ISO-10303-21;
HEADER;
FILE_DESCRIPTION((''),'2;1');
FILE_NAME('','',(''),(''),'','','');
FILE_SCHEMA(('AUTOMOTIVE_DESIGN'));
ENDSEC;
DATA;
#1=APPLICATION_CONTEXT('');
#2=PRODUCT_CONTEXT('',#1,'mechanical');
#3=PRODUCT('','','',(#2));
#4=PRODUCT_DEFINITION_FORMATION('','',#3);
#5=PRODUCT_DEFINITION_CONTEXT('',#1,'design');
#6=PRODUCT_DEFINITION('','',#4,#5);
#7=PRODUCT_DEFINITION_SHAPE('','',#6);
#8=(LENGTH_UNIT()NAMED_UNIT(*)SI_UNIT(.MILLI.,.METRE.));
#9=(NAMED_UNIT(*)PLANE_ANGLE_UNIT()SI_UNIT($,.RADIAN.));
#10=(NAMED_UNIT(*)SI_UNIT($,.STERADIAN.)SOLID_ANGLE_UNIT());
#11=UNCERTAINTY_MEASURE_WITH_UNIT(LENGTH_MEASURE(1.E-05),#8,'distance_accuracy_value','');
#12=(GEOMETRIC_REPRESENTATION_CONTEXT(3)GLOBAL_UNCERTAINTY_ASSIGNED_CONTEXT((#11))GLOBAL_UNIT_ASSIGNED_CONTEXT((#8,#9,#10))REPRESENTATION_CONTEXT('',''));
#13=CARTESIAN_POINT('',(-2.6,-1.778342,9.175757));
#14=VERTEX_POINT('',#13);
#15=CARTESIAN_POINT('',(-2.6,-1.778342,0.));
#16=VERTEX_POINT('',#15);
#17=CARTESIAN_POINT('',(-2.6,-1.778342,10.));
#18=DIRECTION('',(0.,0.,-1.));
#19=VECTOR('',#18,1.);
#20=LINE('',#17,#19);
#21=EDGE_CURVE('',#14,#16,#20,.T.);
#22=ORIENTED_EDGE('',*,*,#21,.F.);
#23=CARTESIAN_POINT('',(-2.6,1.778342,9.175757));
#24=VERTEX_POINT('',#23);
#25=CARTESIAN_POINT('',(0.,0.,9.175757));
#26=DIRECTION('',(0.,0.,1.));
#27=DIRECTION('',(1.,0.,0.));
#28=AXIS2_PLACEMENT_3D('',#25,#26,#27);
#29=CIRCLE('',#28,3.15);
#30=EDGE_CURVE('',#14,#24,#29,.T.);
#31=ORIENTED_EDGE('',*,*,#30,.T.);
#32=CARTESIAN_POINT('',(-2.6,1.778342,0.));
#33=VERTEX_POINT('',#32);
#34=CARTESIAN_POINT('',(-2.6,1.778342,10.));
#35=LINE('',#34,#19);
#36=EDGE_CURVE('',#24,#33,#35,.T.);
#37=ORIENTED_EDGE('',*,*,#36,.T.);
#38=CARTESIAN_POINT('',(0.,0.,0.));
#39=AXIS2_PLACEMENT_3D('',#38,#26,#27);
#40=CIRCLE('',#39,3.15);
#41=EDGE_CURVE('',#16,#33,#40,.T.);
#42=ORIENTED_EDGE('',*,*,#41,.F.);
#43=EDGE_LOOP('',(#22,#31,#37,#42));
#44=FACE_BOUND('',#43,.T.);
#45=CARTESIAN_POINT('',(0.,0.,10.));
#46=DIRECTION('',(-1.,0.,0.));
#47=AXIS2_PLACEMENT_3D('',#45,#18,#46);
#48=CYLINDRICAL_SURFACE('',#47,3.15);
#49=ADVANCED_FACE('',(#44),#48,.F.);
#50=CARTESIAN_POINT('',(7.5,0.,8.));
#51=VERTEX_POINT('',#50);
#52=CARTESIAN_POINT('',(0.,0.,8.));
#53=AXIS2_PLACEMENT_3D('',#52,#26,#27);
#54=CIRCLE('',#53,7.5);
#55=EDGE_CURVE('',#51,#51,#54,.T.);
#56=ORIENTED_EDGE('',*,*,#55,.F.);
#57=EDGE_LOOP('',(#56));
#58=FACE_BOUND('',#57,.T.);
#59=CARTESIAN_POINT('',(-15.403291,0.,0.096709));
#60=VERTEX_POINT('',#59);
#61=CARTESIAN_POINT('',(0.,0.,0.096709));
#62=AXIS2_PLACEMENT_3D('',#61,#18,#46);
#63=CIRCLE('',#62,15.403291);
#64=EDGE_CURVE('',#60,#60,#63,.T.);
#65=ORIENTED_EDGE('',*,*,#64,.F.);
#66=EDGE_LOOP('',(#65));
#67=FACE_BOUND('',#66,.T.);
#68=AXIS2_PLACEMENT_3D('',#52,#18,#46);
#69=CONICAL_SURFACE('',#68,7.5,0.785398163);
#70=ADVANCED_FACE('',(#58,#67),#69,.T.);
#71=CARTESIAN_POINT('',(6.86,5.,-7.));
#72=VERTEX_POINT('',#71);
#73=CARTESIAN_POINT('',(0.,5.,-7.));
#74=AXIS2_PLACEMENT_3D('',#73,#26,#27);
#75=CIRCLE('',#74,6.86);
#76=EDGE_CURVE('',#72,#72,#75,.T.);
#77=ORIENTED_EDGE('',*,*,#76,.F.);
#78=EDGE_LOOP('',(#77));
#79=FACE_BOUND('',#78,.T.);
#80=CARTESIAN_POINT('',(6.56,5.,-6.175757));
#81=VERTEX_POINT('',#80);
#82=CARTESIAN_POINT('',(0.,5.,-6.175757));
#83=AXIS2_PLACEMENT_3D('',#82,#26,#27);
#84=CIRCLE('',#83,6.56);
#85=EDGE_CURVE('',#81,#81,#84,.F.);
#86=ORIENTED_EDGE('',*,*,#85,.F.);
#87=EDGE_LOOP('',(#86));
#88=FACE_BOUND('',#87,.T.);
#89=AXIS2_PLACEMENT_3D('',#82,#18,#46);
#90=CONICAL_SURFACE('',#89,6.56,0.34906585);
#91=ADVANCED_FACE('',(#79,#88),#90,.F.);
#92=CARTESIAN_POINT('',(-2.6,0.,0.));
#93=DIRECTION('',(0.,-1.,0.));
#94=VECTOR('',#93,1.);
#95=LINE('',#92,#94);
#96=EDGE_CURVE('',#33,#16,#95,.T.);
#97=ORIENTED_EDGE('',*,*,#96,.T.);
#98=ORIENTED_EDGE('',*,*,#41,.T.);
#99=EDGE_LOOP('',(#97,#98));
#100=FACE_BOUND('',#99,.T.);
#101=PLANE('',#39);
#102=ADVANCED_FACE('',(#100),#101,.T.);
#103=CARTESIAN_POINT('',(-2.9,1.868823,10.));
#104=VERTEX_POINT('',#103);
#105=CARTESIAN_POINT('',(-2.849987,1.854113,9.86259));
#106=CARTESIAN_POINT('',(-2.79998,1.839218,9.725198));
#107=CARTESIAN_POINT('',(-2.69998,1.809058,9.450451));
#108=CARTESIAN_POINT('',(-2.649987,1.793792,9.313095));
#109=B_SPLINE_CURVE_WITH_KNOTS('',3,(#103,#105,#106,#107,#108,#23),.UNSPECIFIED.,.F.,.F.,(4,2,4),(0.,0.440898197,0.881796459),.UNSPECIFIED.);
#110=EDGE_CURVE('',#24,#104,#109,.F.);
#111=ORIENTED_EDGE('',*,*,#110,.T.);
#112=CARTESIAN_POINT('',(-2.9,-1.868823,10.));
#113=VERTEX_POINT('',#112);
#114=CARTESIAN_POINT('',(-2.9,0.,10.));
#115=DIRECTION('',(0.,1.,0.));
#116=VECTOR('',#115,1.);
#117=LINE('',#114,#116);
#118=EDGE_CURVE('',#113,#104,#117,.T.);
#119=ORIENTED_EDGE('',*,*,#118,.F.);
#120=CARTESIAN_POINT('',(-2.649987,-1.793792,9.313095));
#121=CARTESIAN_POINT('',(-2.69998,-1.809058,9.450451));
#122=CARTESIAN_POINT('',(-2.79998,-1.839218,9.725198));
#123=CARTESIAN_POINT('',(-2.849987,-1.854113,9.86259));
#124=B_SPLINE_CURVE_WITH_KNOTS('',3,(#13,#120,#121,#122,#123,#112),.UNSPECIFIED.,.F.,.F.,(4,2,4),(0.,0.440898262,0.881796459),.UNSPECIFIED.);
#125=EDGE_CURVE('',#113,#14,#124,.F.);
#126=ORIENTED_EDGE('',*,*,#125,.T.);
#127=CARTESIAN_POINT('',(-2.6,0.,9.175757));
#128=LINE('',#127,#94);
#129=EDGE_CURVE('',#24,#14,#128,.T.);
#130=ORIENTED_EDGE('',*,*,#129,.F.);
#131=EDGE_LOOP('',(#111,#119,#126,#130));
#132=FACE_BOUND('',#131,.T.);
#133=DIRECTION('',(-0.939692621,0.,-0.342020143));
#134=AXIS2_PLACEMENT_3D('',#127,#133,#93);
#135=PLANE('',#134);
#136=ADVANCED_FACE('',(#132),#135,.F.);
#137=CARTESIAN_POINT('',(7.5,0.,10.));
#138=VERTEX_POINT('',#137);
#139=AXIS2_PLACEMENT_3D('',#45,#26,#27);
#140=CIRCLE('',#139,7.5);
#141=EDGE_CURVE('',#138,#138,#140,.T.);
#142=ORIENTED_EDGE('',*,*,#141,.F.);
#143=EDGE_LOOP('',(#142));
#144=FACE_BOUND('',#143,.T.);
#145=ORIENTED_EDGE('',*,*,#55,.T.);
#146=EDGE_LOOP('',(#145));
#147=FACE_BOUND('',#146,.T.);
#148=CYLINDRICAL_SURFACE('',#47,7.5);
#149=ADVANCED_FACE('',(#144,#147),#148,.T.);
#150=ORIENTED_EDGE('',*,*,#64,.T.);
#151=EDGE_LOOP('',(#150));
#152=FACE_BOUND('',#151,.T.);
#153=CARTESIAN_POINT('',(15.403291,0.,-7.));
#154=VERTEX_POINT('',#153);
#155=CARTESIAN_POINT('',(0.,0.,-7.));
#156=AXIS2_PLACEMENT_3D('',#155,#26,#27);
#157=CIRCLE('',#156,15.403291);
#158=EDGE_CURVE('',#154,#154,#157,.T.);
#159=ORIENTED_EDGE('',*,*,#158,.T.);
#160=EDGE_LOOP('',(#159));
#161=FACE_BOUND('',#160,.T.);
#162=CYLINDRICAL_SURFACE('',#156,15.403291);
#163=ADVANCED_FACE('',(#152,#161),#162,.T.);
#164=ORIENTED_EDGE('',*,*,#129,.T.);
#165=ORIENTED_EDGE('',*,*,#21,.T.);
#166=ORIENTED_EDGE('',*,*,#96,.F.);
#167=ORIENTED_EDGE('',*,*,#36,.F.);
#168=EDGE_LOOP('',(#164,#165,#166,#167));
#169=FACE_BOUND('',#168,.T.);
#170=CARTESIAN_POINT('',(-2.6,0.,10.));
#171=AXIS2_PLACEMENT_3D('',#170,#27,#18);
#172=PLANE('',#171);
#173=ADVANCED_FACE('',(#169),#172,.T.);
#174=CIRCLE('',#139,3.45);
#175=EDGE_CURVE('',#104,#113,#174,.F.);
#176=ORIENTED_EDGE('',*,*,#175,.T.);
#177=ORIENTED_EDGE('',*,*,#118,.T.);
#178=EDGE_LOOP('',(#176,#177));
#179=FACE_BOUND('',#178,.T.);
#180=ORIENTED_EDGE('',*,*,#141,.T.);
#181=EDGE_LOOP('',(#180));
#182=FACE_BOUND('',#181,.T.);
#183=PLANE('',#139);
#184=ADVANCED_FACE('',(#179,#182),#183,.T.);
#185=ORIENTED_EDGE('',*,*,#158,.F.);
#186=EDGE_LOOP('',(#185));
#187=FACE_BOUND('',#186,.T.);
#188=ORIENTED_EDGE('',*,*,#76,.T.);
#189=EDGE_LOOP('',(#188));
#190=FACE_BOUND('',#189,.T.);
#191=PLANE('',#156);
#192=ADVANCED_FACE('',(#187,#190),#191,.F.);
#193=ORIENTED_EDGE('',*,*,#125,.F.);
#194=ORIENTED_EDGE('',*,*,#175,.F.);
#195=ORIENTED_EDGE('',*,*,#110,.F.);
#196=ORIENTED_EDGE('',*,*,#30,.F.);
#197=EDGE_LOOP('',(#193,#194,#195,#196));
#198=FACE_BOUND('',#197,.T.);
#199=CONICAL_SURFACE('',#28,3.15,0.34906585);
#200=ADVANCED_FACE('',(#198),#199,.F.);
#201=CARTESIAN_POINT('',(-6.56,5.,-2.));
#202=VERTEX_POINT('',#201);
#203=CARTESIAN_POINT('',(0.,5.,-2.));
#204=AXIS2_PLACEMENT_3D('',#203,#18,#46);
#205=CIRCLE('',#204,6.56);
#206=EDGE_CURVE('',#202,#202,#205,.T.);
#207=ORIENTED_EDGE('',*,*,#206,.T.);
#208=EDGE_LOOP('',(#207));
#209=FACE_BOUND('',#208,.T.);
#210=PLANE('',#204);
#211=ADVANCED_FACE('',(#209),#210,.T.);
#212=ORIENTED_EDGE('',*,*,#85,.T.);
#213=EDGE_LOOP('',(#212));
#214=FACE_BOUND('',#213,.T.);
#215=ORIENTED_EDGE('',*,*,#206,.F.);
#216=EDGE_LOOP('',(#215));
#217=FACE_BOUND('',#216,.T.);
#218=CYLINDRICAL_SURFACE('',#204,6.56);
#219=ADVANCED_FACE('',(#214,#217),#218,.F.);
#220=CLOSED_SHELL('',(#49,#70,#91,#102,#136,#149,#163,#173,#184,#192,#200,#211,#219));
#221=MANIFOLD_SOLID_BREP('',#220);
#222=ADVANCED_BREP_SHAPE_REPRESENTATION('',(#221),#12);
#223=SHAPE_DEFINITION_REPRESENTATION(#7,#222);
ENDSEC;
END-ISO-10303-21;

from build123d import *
from OCP.BRepFilletAPI import BRepFilletAPI_MakeChamfer

# Parameters (mm, degrees)
SKETCH1_R           = 7.5
BOSS_EXTRUDE1_DEPTH = 10
SKETCH2_R           = 15.403290795
BOSS_EXTRUDE2_DEPTH = 7
SKETCH4_R           = 6.56
CUT_EXTRUDE1_DEPTH  = 5
CHAMFER1_SIZE       = 8
CHAMFER2_SIZE       = 0.3
CHAMFER2_SIZE2      = 0.824243226


with BuildPart() as part:
    # Sketch1 → Boss-Extrude1 (new body)
    with BuildSketch(Plane.XY):
        Circle(SKETCH1_R)
        with BuildLine():
            Line((-2.6, -1.778341924), (-2.6, 1.778341924))
            ThreePointArc((-2.6, 1.778341924), (3.15, 0), (-2.6, -1.778341924))
        make_face(mode=Mode.SUBTRACT)
    extrude(amount=BOSS_EXTRUDE1_DEPTH)

    # Sketch2 → Boss-Extrude2 (add)
    with BuildSketch(Plane.XY):
        Circle(SKETCH2_R)
    extrude(amount=-BOSS_EXTRUDE2_DEPTH)

    # Sketch4 → Cut-Extrude1 (cut)
    with BuildSketch(Plane(origin=(0, 0, -7), x_dir=(-1, 0, 0), z_dir=(0, 0, -1))):
        with Locations((0, 5)):
            Circle(SKETCH4_R)
    extrude(amount=-CUT_EXTRUDE1_DEPTH, mode=Mode.SUBTRACT)

    # Chamfer1
    # the kernel refuses this chamfer: 8 mm, written as the material it adds along each edge
    with BuildSketch(Plane(origin=(0, 0, 0), x_dir=(1, 0, 0), z_dir=(0, -1, 0))) as chamfer1_piece_1_section:
        Polygon((7.5 + CHAMFER1_SIZE, 0), (7.5, CHAMFER1_SIZE), (7.5, 0), align=None)
    chamfer1_piece_1 = revolve(axis=Axis((0, 0, 0), (0, 0, 1)), mode=Mode.PRIVATE)
    chamfer1_piece_1 = chamfer1_piece_1 & Plane(origin=(0, 0, 4.06906202), x_dir=(1, 0, 0), z_dir=(0, 0, 1)) * Cylinder(15.403290795, 62, mode=Mode.PRIVATE)
    add(chamfer1_piece_1)

    # Chamfer2: one chamfer whose edges measure the first distance from different faces: ONE call of the kernel's chamfer builder (chamfer() names one face for all edges)
    chamfer2_edges_1 = [part.edges().sort_by_distance(p)[0] for p in [
        (6.56, 5, -7),
    ]]
    chamfer2_side_1 = [part.faces().sort_by_distance(p)[0] for p in [
        (-14.96761994, 0, -7),
    ]]
    chamfer2_edges_2 = [part.edges().sort_by_distance(p)[0] for p in [
        (3.15, 0, 10),
        (-2.6, 0, 10),
    ]]
    chamfer2_side_2 = [part.faces().sort_by_distance(p)[0] for p in [
        (-7.287867966, 0, 10),
    ]]
    chamfer2 = BRepFilletAPI_MakeChamfer(part.part.solid().wrapped)
    for e in chamfer2_edges_1:
        chamfer2.Add(CHAMFER2_SIZE, CHAMFER2_SIZE2, e.wrapped, chamfer2_side_1[0].wrapped)  # the first distance lies on this face
    for e in chamfer2_edges_2:
        chamfer2.Add(CHAMFER2_SIZE, CHAMFER2_SIZE2, e.wrapped, chamfer2_side_2[0].wrapped)  # the first distance lies on this face
    add(Compound.cast(chamfer2.Shape()), mode=Mode.REPLACE)


solid = part.part
